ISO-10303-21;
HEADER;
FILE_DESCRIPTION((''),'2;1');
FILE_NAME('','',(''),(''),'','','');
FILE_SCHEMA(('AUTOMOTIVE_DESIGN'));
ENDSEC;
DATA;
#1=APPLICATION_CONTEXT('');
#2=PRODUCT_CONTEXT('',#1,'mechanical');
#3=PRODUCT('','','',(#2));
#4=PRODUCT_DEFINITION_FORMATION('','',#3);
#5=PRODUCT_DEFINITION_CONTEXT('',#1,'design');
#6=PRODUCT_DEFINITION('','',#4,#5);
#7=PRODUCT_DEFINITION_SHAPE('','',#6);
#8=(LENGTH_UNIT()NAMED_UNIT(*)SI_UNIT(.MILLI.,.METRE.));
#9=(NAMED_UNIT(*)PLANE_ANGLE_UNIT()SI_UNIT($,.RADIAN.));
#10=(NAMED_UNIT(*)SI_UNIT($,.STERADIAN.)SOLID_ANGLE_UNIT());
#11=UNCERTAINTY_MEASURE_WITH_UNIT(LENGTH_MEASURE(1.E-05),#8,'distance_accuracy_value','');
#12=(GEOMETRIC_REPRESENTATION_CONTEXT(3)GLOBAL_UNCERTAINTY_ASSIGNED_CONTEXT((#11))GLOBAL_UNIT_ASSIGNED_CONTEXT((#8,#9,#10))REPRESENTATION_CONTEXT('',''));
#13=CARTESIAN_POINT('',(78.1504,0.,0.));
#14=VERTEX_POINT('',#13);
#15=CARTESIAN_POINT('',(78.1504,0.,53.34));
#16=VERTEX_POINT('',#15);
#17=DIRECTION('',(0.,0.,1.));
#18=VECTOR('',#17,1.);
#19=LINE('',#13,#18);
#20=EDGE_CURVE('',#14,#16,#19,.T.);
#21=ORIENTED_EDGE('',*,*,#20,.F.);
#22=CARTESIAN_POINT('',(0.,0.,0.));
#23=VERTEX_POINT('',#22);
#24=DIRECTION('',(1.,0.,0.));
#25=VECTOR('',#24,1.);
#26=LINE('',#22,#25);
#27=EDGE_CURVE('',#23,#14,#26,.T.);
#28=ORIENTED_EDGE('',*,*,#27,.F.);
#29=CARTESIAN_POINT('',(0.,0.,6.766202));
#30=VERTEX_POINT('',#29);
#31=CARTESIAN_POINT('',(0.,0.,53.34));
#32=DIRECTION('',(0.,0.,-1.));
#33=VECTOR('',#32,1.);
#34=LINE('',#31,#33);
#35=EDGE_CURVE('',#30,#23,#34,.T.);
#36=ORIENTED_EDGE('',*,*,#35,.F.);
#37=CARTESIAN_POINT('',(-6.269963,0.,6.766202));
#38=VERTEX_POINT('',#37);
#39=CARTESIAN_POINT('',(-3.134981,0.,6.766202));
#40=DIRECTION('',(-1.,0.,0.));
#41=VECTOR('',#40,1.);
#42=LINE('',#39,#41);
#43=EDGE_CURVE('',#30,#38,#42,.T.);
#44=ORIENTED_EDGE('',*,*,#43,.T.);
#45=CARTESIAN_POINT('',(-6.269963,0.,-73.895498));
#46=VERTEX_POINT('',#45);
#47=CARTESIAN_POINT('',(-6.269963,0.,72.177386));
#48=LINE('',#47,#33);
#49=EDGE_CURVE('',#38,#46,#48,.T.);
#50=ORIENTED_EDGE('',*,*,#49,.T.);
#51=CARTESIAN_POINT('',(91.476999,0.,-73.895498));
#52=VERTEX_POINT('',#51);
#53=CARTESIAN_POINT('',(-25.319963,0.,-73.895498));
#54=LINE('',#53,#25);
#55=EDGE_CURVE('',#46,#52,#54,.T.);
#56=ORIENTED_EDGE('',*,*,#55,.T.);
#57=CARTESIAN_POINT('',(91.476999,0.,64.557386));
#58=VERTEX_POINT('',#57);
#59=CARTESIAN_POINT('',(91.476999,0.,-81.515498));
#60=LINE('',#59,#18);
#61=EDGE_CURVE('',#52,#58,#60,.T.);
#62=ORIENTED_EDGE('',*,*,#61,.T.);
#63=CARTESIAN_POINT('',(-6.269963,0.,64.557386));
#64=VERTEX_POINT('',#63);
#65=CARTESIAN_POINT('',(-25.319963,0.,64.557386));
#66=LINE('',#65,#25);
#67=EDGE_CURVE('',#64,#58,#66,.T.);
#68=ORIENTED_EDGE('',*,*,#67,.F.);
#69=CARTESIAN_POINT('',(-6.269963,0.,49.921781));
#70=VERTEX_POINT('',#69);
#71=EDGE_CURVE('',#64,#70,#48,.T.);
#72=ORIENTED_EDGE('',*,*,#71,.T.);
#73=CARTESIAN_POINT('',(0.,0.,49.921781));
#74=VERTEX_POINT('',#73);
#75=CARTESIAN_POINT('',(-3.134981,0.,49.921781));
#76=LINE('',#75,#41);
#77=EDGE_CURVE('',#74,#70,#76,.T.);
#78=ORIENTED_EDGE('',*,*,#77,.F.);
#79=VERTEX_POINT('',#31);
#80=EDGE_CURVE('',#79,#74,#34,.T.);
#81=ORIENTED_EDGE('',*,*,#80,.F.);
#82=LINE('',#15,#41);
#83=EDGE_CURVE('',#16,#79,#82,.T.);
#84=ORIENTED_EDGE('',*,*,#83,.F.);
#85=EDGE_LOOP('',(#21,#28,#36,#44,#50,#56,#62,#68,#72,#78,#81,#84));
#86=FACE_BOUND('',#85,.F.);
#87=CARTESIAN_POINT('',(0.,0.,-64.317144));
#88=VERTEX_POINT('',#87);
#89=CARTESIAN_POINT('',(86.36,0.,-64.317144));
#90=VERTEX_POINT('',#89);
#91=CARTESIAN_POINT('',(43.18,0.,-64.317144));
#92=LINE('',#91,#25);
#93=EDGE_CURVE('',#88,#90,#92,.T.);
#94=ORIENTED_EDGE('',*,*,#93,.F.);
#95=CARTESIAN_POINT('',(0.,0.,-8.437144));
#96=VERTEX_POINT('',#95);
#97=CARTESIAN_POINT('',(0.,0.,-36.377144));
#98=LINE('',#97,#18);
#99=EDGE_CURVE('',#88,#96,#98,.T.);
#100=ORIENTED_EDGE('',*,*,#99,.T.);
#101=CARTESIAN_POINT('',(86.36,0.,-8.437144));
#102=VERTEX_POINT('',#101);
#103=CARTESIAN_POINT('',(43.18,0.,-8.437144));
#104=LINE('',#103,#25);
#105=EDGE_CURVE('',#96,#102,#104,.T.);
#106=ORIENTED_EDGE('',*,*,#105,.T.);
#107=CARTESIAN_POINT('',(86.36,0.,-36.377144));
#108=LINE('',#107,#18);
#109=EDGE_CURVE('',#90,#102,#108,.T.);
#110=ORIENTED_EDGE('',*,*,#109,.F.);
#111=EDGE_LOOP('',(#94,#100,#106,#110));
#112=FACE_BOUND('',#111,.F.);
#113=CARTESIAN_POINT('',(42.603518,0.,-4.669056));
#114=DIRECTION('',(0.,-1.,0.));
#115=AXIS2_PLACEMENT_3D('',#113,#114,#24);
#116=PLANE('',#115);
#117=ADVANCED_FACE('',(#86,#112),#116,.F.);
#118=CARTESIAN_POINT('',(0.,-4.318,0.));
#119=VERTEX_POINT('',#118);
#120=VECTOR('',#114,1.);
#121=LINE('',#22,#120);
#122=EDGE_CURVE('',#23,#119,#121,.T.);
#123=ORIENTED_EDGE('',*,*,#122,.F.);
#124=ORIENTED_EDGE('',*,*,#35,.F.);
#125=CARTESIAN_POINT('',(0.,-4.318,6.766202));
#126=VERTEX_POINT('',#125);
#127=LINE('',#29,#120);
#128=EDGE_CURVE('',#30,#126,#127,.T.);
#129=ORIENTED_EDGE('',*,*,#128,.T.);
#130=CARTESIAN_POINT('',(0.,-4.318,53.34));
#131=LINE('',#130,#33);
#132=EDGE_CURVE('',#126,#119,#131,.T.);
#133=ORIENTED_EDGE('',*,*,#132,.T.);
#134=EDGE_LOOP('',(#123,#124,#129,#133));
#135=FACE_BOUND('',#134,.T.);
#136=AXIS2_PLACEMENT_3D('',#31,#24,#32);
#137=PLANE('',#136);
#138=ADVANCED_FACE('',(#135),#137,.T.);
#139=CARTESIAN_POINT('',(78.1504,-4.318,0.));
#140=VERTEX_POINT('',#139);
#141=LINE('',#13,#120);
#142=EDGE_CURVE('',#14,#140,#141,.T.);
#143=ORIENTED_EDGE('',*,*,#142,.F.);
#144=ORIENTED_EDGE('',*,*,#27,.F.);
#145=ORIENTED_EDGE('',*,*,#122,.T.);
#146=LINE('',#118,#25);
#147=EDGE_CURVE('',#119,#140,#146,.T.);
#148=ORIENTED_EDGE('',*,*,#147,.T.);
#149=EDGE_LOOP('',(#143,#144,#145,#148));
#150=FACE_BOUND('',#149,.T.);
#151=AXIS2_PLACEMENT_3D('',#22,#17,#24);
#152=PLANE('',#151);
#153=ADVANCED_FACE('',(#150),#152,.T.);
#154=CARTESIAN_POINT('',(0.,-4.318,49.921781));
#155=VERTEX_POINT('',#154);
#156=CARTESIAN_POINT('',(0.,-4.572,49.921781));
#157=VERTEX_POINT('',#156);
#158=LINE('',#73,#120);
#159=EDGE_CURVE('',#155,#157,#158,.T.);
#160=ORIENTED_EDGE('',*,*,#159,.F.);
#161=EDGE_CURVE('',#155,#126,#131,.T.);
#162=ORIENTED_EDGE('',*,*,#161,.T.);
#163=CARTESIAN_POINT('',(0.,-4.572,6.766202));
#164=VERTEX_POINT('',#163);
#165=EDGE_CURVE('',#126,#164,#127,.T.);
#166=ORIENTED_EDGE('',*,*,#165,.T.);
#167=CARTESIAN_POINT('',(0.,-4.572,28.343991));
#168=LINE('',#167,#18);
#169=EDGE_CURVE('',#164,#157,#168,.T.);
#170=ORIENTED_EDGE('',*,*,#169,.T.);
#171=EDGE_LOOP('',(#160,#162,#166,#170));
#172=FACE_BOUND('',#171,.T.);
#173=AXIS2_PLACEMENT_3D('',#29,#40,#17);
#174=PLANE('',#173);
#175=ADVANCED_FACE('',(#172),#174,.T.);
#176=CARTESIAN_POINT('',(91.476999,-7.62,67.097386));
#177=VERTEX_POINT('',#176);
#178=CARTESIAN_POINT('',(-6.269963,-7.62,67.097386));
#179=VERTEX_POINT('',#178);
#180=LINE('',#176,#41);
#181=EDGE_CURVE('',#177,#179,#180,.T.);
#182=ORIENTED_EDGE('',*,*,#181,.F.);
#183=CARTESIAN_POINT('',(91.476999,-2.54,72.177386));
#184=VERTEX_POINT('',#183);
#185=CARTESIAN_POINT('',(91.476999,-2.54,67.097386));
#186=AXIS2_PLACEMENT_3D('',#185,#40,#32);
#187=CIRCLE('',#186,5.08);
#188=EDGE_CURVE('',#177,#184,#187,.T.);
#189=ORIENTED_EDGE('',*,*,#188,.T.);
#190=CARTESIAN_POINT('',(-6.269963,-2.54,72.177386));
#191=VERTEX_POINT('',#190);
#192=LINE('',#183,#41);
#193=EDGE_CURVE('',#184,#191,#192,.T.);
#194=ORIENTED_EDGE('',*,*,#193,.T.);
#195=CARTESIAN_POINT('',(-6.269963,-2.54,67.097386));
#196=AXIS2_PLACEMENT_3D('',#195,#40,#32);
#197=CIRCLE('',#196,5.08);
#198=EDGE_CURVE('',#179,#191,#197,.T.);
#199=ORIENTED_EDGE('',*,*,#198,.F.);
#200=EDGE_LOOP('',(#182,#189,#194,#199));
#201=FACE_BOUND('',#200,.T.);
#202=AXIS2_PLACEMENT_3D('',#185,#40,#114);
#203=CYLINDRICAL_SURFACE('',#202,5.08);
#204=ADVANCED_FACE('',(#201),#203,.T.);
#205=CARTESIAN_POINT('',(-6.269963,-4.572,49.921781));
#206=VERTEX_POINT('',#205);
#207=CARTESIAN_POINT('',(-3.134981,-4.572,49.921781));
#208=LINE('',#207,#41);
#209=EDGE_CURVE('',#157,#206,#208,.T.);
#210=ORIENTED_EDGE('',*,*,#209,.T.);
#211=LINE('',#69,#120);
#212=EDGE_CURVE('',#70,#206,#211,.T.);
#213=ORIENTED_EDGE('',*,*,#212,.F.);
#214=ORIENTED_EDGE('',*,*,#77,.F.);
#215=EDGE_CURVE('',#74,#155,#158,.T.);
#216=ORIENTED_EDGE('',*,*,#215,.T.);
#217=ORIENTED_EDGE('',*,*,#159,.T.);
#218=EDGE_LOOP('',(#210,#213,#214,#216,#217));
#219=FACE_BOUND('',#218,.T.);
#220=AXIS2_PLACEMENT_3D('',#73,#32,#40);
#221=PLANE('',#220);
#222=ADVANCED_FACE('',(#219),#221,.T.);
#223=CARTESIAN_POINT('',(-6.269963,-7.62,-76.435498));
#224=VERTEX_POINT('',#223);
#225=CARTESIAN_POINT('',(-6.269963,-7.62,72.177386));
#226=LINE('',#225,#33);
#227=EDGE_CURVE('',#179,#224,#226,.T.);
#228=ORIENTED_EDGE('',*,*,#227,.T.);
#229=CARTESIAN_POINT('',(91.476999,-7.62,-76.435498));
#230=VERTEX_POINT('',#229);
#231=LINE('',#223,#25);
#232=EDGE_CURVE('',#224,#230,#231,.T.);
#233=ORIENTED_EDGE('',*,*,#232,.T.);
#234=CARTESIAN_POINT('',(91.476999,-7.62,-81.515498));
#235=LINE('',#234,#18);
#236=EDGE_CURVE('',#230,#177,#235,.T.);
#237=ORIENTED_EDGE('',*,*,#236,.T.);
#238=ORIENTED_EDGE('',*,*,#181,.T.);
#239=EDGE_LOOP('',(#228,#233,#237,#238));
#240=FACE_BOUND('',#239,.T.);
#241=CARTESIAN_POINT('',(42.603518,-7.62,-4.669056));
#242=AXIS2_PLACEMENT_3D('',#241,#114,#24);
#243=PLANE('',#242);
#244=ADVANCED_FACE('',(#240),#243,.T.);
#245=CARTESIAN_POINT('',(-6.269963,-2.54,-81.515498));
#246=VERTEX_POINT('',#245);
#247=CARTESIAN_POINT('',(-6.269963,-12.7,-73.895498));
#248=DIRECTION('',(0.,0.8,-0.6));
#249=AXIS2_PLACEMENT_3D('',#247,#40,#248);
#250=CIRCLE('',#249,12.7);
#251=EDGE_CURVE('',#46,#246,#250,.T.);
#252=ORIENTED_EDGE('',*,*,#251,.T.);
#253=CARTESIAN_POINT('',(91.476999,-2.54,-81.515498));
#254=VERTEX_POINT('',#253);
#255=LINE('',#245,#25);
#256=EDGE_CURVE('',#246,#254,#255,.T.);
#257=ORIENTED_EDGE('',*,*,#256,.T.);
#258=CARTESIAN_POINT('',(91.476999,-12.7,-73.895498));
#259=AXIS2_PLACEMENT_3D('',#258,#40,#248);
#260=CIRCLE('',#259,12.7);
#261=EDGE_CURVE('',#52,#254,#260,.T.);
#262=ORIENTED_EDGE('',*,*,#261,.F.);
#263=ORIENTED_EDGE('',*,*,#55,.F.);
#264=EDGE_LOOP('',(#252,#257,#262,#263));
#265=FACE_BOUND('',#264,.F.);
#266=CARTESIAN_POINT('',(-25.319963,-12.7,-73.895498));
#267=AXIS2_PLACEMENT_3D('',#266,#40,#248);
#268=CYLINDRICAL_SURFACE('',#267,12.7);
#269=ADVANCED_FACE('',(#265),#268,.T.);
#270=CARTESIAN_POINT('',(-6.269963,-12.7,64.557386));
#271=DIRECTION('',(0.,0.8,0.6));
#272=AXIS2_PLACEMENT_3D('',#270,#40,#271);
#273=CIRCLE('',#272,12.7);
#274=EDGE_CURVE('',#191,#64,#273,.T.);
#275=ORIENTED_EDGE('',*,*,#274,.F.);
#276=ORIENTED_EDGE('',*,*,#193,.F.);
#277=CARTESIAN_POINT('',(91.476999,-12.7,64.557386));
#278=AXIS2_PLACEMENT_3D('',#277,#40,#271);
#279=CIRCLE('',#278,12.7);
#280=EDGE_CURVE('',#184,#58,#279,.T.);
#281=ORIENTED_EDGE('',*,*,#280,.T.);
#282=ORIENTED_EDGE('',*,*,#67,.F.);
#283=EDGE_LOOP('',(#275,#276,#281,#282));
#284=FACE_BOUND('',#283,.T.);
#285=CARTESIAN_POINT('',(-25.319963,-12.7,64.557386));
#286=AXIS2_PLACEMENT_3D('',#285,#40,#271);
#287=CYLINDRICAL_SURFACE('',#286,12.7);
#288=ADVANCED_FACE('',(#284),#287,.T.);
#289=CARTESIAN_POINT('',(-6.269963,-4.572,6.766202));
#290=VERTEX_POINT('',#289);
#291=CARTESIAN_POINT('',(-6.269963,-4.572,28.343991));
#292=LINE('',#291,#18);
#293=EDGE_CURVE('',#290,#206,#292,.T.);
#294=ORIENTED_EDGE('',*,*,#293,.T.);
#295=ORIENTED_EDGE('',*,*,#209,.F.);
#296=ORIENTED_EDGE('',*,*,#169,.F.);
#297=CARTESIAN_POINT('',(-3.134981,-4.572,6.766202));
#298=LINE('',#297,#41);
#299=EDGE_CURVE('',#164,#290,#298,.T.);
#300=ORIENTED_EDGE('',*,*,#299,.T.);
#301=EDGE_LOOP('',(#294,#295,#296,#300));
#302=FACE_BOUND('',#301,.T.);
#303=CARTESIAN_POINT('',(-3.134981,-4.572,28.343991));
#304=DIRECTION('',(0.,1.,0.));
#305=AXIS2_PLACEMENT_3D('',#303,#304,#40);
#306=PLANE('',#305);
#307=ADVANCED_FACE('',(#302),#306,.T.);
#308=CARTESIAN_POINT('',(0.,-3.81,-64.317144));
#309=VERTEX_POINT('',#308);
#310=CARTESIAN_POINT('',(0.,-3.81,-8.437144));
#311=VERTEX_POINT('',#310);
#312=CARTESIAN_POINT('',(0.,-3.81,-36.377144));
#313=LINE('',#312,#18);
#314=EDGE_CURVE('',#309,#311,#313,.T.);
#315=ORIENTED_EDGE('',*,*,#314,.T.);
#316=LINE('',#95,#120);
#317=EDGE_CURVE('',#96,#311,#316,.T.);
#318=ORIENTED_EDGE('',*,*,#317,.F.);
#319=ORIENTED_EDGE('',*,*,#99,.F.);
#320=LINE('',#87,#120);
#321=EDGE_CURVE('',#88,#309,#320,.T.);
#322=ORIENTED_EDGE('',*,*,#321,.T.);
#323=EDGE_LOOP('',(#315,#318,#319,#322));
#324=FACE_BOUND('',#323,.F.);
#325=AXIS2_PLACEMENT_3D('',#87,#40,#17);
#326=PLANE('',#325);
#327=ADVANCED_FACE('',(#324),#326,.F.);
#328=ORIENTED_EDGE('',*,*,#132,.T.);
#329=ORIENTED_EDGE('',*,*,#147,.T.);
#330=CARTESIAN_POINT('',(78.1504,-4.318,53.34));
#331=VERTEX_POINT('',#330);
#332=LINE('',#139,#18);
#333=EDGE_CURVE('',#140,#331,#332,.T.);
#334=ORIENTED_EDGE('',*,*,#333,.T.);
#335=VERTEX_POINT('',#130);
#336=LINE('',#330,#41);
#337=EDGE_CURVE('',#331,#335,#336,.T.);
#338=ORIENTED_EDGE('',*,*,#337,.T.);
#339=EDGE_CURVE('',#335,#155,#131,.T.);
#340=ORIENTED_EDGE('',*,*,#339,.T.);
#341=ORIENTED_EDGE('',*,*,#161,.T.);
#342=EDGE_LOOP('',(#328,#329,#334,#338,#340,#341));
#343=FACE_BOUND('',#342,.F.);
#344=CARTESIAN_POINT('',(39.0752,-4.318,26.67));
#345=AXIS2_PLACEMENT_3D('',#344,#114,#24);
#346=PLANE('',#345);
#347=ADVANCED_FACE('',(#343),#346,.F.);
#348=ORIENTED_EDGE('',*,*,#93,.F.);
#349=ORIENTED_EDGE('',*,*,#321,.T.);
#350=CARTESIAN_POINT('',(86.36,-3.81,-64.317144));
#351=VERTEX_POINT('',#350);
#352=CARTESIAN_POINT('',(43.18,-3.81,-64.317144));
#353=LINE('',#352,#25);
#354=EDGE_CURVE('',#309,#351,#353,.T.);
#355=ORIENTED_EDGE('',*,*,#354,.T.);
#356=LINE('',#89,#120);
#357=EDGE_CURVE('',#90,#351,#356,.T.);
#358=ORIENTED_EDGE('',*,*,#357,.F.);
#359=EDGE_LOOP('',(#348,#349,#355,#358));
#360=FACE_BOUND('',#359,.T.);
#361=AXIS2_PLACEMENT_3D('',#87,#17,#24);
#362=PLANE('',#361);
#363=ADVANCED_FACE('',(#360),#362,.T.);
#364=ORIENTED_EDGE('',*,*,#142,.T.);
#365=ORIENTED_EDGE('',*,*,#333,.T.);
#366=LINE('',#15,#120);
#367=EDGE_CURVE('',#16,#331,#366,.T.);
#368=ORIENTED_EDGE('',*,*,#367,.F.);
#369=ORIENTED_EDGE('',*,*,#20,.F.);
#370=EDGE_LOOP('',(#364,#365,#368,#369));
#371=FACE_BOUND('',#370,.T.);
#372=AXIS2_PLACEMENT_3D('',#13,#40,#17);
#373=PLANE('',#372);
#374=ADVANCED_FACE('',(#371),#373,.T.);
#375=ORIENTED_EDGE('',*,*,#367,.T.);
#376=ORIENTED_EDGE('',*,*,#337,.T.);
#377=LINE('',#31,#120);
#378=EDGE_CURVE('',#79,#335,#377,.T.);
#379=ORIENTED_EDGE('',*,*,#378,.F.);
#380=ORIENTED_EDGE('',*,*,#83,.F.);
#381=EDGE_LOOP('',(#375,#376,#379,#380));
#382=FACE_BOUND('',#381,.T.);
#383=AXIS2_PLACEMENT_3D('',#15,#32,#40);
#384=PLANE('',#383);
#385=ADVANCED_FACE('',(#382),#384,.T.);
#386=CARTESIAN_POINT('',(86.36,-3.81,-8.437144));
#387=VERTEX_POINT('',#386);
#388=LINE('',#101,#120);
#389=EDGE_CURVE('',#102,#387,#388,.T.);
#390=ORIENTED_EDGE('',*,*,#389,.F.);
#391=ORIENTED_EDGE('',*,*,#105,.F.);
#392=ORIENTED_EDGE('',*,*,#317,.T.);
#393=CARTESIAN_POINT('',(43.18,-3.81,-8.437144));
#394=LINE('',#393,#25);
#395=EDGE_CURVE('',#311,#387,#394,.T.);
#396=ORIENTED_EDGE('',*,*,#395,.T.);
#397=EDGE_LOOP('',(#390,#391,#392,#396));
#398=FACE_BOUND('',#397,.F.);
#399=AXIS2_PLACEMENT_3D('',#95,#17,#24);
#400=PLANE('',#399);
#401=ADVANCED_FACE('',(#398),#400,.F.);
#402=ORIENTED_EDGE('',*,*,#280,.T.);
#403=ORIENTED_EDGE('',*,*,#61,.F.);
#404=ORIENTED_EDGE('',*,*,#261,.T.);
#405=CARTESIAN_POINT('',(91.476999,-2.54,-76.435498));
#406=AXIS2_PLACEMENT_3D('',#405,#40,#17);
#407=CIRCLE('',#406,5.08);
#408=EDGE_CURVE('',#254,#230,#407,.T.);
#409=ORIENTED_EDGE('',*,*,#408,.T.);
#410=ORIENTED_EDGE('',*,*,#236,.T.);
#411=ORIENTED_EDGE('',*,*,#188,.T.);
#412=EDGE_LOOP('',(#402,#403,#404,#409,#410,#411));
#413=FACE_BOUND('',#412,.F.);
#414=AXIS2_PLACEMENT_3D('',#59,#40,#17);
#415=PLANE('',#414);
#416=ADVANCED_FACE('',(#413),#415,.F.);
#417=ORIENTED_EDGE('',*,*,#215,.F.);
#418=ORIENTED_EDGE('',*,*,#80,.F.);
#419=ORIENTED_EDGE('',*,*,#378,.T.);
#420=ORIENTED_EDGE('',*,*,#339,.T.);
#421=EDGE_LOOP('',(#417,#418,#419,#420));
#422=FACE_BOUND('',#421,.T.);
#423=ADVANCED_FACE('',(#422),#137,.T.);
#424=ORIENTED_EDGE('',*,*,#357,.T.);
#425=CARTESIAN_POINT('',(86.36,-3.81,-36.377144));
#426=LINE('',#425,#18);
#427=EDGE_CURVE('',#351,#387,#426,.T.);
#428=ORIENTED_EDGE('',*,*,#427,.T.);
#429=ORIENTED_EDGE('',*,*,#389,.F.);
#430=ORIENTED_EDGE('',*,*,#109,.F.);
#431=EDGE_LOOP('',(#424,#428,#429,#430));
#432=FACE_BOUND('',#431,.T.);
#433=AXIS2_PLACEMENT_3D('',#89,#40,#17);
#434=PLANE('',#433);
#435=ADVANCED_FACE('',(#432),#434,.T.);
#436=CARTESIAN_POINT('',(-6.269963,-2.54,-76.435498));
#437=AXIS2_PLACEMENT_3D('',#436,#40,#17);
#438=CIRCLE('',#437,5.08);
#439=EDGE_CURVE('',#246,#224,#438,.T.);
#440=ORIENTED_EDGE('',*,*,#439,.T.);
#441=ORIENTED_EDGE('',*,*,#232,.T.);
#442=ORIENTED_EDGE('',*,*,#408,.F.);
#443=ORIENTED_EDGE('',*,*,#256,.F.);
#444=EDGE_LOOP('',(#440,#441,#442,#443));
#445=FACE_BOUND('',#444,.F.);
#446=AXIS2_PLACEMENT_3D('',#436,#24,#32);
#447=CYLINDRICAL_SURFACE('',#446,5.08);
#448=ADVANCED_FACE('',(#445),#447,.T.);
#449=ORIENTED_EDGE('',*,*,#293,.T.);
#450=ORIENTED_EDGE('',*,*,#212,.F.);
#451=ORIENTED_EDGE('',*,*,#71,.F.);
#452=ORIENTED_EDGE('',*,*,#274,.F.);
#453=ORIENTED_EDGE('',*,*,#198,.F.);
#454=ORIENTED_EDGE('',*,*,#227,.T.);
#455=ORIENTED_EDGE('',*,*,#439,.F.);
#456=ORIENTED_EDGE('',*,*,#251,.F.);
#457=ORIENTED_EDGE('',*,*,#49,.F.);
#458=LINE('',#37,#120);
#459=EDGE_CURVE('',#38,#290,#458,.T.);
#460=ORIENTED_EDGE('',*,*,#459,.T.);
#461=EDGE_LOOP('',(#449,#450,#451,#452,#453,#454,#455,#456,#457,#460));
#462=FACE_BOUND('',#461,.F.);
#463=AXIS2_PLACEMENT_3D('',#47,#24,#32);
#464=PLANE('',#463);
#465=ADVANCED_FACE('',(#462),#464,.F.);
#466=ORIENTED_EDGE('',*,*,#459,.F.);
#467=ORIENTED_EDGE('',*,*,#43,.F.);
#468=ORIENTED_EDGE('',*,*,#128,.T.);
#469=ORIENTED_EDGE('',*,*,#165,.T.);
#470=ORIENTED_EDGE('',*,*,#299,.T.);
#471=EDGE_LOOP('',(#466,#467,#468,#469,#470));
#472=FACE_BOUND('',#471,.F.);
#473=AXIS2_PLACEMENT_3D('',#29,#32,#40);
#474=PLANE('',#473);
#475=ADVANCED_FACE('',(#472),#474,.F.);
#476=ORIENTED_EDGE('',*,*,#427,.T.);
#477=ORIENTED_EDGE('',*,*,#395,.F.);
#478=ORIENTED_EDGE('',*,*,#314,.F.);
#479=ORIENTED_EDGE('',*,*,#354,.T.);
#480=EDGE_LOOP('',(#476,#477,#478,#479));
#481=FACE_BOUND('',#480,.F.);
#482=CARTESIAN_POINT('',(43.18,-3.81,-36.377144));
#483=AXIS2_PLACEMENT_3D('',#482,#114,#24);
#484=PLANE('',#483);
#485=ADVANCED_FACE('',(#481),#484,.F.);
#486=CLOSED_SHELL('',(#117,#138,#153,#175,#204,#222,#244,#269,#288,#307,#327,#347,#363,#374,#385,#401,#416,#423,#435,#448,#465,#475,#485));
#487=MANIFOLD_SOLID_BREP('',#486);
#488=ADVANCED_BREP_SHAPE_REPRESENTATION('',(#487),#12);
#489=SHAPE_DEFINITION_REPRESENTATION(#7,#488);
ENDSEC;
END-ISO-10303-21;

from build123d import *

# Parameters (mm, degrees)
F3_DEPTH     = 7.62
F4_DEPTH     = 4.318
F1_W         = 86.36
F1_H         = 55.88
F5_DEPTH     = 3.81
F6_W         = 6.2699629925
F6_H         = 43.1555788964
F7_DEPTH     = 4.572
F8_R         = 5.08
F9_T1_DEPTH  = 135.8469622158
F10_R        = 5.08
F11_T1_DEPTH = 135.8469622158


# Not quite as in the source:
# - a fillet or chamfer that OpenCascade refuses, or shapes differently, is made with other operations: its cross-section is extruded or revolved along the edge and cut away or added


with BuildPart() as f3:
    # F2 (on Front) → F3 (new body)
    with BuildSketch(Plane.XZ):
        Polygon((-6.2699629925, 72.1773862183), (-6.2699629925, 59.4773862183), (-6.2699629925, -68.8154984593), (-6.2699629925, -81.5154984593), (91.4769992232, -81.5154984593), (91.4769992232, -68.8154984593), (91.4769992232, 59.4773862183), (91.4769992232, 72.1773862183), align=None)
    extrude(amount=F3_DEPTH)

    # F0 (on Front) → F4 (cut)
    with BuildSketch(Plane.XZ):
        Polygon((0, 53.34), (0, 0), (66.5871798992, 0), (70.5303996801, 0), (78.1503996801, 0), (78.1503996801, 53.34), (70.5303996801, 53.34), (64.516, 53.34), align=None)
    extrude(amount=F4_DEPTH, mode=Mode.SUBTRACT)

    # F1 (on Front) → F5 (cut)
    with BuildSketch(Plane.XZ):
        with Locations((43.18, -36.3771444535)):
            Rectangle(F1_W, F1_H)
    extrude(amount=F5_DEPTH, mode=Mode.SUBTRACT)

    # F6 (on face) → F7 (cut)
    with BuildSketch(Plane(origin=(0, 0, 0), x_dir=(-1, 0, 0), z_dir=(0, 1, 0))):
        with Locations((3.1349814963, 28.3439913765)):
            Rectangle(F6_W, F6_H)
    extrude(amount=-F7_DEPTH, mode=Mode.SUBTRACT)

    # F8
    f8_edges = [f3.edges().sort_by_distance(p)[0] for p in [
        (42.603518, -7.62, -81.515498),
    ]]
    fillet(f8_edges, radius=F8_R)

    # F9: fillet of radius 12.7 on 1 edges, made by hand

    # F9_s2 → F9_t1 (cut)
    with BuildSketch(Plane.YZ.offset(-25.3199629925)):
        with BuildLine():
            ThreePointArc((-2.54, -81.5154984593), (-0.6517221148, -77.9115910878), (0, -73.8954984593))
            Line((0, -73.8954984593), (0, -81.5154984593))
            Line((0, -81.5154984593), (-2.54, -81.5154984593))
        make_face()
    extrude(amount=F9_T1_DEPTH, mode=Mode.SUBTRACT)

    # F10
    f10_edges = [f3.edges().sort_by_distance(p)[0] for p in [
        (42.603518, -7.62, 72.177386),
    ]]
    fillet(f10_edges, radius=F10_R)

    # F11: fillet of radius 12.7 on 1 edges, made by hand

    # F11_s2 → F11_t1 (cut)
    with BuildSketch(Plane.YZ.offset(-25.3199629925)):
        with BuildLine():
            ThreePointArc((-2.54, 72.1773862183), (-0.6517221148, 68.5734788467), (0, 64.5573862183))
            Line((0, 64.5573862183), (0, 72.1773862183))
            Line((0, 72.1773862183), (-2.54, 72.1773862183))
        make_face()
    extrude(amount=F11_T1_DEPTH, mode=Mode.SUBTRACT)


solid = f3.part
